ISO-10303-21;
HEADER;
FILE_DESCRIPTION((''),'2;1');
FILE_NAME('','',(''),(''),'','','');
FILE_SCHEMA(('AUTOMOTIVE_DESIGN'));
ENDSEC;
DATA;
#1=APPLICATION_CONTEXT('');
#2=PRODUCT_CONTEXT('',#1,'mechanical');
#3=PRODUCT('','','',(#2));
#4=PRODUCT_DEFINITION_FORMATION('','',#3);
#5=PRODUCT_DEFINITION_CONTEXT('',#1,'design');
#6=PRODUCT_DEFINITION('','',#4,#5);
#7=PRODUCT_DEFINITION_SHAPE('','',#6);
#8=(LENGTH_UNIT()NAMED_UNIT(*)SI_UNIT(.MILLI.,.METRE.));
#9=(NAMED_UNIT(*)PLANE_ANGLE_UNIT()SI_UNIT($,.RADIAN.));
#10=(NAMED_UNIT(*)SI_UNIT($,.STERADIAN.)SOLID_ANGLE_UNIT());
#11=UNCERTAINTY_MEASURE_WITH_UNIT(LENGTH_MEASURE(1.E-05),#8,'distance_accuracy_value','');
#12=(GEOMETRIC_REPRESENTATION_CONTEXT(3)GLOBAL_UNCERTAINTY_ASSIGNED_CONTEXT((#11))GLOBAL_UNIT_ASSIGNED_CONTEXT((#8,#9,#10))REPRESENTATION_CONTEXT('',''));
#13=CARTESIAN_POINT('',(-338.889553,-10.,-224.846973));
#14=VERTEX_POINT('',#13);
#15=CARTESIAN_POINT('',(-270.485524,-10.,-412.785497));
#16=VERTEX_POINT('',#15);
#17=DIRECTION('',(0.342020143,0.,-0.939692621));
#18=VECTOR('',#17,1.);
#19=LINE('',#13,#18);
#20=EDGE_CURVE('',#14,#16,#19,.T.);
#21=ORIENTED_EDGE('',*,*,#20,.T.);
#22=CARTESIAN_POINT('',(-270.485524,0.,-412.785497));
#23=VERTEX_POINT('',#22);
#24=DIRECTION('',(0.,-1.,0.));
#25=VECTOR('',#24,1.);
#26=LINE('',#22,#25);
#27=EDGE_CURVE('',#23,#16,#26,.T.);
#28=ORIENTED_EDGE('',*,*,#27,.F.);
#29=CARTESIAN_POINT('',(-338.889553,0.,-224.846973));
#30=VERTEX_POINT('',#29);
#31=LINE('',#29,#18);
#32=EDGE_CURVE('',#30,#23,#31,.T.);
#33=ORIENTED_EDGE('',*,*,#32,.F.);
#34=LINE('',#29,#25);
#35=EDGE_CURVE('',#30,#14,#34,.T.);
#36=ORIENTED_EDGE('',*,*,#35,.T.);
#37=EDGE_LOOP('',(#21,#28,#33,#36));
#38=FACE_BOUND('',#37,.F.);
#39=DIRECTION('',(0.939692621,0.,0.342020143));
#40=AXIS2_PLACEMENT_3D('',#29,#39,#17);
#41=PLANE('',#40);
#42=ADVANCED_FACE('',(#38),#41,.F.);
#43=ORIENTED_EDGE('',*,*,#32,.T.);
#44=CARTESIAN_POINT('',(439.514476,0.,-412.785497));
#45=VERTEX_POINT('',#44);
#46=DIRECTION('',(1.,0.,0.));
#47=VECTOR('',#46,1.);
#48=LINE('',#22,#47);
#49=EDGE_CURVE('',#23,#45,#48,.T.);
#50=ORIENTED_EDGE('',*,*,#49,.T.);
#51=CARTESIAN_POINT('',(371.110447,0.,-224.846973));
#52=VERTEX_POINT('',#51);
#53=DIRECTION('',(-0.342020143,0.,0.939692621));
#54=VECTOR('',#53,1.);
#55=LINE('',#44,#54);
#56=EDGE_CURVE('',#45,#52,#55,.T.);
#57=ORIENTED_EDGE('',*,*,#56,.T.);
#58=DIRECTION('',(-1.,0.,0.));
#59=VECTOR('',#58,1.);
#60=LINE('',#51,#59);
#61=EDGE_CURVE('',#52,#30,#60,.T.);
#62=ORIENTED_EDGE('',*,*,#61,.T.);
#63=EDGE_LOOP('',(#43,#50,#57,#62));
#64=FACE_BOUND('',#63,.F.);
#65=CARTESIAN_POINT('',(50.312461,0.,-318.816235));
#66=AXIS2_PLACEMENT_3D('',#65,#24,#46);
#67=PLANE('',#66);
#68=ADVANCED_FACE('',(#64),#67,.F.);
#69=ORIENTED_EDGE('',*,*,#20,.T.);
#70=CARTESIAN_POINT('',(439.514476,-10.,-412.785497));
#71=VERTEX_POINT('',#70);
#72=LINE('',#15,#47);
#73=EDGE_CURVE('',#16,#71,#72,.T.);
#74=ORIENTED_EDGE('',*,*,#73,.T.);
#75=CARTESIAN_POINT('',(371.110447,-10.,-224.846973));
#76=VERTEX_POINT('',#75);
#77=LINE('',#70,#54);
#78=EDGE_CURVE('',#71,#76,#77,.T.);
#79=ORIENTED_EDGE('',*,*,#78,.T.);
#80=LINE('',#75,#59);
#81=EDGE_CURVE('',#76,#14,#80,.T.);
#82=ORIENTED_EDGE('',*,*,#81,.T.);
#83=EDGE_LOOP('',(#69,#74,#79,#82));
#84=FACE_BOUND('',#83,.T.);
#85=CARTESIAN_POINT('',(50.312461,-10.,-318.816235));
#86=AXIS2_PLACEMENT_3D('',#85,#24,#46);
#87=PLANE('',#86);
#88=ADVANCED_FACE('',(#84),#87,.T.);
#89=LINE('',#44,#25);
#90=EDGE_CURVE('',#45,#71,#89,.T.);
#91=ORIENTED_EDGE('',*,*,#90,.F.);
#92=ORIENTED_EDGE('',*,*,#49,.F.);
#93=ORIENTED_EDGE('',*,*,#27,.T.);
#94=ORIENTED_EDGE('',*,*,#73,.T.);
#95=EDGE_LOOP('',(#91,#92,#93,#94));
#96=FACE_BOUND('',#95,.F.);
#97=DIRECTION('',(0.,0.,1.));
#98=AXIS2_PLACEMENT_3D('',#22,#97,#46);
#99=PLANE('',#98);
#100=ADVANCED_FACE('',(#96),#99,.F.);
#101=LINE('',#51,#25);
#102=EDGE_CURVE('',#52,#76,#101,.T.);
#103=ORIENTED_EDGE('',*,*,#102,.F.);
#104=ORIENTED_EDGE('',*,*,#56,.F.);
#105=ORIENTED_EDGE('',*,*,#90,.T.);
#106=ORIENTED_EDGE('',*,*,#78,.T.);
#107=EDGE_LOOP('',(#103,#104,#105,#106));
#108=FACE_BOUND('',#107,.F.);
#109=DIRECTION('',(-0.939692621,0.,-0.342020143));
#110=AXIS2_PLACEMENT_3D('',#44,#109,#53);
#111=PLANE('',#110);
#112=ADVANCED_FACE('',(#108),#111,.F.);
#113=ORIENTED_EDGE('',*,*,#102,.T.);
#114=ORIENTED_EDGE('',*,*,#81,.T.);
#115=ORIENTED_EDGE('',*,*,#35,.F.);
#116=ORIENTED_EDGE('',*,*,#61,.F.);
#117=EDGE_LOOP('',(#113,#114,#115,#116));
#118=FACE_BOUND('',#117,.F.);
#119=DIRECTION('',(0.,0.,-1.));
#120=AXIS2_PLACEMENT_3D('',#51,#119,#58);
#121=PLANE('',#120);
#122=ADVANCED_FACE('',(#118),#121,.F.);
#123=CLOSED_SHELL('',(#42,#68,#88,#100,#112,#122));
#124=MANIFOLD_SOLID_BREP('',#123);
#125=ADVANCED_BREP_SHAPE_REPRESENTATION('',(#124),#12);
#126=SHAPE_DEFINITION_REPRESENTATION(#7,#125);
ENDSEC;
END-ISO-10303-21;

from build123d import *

# Parameters (mm, degrees)
F1_DEPTH = 10


# Not quite as in the source:
# - a feature names something its author has since deleted; it is built from what else it names


with BuildPart() as f1:
    # F0 (on Front) → F1 (new body)
    with BuildSketch(Plane.XZ):
        Polygon((-338.8895529919, -224.8469729066), (-270.4855243268, -412.7854970638), (439.5144756732, -412.7854970638), (371.1104470081, -224.8469729066), align=None)
    extrude(amount=F1_DEPTH)


solid = f1.part
